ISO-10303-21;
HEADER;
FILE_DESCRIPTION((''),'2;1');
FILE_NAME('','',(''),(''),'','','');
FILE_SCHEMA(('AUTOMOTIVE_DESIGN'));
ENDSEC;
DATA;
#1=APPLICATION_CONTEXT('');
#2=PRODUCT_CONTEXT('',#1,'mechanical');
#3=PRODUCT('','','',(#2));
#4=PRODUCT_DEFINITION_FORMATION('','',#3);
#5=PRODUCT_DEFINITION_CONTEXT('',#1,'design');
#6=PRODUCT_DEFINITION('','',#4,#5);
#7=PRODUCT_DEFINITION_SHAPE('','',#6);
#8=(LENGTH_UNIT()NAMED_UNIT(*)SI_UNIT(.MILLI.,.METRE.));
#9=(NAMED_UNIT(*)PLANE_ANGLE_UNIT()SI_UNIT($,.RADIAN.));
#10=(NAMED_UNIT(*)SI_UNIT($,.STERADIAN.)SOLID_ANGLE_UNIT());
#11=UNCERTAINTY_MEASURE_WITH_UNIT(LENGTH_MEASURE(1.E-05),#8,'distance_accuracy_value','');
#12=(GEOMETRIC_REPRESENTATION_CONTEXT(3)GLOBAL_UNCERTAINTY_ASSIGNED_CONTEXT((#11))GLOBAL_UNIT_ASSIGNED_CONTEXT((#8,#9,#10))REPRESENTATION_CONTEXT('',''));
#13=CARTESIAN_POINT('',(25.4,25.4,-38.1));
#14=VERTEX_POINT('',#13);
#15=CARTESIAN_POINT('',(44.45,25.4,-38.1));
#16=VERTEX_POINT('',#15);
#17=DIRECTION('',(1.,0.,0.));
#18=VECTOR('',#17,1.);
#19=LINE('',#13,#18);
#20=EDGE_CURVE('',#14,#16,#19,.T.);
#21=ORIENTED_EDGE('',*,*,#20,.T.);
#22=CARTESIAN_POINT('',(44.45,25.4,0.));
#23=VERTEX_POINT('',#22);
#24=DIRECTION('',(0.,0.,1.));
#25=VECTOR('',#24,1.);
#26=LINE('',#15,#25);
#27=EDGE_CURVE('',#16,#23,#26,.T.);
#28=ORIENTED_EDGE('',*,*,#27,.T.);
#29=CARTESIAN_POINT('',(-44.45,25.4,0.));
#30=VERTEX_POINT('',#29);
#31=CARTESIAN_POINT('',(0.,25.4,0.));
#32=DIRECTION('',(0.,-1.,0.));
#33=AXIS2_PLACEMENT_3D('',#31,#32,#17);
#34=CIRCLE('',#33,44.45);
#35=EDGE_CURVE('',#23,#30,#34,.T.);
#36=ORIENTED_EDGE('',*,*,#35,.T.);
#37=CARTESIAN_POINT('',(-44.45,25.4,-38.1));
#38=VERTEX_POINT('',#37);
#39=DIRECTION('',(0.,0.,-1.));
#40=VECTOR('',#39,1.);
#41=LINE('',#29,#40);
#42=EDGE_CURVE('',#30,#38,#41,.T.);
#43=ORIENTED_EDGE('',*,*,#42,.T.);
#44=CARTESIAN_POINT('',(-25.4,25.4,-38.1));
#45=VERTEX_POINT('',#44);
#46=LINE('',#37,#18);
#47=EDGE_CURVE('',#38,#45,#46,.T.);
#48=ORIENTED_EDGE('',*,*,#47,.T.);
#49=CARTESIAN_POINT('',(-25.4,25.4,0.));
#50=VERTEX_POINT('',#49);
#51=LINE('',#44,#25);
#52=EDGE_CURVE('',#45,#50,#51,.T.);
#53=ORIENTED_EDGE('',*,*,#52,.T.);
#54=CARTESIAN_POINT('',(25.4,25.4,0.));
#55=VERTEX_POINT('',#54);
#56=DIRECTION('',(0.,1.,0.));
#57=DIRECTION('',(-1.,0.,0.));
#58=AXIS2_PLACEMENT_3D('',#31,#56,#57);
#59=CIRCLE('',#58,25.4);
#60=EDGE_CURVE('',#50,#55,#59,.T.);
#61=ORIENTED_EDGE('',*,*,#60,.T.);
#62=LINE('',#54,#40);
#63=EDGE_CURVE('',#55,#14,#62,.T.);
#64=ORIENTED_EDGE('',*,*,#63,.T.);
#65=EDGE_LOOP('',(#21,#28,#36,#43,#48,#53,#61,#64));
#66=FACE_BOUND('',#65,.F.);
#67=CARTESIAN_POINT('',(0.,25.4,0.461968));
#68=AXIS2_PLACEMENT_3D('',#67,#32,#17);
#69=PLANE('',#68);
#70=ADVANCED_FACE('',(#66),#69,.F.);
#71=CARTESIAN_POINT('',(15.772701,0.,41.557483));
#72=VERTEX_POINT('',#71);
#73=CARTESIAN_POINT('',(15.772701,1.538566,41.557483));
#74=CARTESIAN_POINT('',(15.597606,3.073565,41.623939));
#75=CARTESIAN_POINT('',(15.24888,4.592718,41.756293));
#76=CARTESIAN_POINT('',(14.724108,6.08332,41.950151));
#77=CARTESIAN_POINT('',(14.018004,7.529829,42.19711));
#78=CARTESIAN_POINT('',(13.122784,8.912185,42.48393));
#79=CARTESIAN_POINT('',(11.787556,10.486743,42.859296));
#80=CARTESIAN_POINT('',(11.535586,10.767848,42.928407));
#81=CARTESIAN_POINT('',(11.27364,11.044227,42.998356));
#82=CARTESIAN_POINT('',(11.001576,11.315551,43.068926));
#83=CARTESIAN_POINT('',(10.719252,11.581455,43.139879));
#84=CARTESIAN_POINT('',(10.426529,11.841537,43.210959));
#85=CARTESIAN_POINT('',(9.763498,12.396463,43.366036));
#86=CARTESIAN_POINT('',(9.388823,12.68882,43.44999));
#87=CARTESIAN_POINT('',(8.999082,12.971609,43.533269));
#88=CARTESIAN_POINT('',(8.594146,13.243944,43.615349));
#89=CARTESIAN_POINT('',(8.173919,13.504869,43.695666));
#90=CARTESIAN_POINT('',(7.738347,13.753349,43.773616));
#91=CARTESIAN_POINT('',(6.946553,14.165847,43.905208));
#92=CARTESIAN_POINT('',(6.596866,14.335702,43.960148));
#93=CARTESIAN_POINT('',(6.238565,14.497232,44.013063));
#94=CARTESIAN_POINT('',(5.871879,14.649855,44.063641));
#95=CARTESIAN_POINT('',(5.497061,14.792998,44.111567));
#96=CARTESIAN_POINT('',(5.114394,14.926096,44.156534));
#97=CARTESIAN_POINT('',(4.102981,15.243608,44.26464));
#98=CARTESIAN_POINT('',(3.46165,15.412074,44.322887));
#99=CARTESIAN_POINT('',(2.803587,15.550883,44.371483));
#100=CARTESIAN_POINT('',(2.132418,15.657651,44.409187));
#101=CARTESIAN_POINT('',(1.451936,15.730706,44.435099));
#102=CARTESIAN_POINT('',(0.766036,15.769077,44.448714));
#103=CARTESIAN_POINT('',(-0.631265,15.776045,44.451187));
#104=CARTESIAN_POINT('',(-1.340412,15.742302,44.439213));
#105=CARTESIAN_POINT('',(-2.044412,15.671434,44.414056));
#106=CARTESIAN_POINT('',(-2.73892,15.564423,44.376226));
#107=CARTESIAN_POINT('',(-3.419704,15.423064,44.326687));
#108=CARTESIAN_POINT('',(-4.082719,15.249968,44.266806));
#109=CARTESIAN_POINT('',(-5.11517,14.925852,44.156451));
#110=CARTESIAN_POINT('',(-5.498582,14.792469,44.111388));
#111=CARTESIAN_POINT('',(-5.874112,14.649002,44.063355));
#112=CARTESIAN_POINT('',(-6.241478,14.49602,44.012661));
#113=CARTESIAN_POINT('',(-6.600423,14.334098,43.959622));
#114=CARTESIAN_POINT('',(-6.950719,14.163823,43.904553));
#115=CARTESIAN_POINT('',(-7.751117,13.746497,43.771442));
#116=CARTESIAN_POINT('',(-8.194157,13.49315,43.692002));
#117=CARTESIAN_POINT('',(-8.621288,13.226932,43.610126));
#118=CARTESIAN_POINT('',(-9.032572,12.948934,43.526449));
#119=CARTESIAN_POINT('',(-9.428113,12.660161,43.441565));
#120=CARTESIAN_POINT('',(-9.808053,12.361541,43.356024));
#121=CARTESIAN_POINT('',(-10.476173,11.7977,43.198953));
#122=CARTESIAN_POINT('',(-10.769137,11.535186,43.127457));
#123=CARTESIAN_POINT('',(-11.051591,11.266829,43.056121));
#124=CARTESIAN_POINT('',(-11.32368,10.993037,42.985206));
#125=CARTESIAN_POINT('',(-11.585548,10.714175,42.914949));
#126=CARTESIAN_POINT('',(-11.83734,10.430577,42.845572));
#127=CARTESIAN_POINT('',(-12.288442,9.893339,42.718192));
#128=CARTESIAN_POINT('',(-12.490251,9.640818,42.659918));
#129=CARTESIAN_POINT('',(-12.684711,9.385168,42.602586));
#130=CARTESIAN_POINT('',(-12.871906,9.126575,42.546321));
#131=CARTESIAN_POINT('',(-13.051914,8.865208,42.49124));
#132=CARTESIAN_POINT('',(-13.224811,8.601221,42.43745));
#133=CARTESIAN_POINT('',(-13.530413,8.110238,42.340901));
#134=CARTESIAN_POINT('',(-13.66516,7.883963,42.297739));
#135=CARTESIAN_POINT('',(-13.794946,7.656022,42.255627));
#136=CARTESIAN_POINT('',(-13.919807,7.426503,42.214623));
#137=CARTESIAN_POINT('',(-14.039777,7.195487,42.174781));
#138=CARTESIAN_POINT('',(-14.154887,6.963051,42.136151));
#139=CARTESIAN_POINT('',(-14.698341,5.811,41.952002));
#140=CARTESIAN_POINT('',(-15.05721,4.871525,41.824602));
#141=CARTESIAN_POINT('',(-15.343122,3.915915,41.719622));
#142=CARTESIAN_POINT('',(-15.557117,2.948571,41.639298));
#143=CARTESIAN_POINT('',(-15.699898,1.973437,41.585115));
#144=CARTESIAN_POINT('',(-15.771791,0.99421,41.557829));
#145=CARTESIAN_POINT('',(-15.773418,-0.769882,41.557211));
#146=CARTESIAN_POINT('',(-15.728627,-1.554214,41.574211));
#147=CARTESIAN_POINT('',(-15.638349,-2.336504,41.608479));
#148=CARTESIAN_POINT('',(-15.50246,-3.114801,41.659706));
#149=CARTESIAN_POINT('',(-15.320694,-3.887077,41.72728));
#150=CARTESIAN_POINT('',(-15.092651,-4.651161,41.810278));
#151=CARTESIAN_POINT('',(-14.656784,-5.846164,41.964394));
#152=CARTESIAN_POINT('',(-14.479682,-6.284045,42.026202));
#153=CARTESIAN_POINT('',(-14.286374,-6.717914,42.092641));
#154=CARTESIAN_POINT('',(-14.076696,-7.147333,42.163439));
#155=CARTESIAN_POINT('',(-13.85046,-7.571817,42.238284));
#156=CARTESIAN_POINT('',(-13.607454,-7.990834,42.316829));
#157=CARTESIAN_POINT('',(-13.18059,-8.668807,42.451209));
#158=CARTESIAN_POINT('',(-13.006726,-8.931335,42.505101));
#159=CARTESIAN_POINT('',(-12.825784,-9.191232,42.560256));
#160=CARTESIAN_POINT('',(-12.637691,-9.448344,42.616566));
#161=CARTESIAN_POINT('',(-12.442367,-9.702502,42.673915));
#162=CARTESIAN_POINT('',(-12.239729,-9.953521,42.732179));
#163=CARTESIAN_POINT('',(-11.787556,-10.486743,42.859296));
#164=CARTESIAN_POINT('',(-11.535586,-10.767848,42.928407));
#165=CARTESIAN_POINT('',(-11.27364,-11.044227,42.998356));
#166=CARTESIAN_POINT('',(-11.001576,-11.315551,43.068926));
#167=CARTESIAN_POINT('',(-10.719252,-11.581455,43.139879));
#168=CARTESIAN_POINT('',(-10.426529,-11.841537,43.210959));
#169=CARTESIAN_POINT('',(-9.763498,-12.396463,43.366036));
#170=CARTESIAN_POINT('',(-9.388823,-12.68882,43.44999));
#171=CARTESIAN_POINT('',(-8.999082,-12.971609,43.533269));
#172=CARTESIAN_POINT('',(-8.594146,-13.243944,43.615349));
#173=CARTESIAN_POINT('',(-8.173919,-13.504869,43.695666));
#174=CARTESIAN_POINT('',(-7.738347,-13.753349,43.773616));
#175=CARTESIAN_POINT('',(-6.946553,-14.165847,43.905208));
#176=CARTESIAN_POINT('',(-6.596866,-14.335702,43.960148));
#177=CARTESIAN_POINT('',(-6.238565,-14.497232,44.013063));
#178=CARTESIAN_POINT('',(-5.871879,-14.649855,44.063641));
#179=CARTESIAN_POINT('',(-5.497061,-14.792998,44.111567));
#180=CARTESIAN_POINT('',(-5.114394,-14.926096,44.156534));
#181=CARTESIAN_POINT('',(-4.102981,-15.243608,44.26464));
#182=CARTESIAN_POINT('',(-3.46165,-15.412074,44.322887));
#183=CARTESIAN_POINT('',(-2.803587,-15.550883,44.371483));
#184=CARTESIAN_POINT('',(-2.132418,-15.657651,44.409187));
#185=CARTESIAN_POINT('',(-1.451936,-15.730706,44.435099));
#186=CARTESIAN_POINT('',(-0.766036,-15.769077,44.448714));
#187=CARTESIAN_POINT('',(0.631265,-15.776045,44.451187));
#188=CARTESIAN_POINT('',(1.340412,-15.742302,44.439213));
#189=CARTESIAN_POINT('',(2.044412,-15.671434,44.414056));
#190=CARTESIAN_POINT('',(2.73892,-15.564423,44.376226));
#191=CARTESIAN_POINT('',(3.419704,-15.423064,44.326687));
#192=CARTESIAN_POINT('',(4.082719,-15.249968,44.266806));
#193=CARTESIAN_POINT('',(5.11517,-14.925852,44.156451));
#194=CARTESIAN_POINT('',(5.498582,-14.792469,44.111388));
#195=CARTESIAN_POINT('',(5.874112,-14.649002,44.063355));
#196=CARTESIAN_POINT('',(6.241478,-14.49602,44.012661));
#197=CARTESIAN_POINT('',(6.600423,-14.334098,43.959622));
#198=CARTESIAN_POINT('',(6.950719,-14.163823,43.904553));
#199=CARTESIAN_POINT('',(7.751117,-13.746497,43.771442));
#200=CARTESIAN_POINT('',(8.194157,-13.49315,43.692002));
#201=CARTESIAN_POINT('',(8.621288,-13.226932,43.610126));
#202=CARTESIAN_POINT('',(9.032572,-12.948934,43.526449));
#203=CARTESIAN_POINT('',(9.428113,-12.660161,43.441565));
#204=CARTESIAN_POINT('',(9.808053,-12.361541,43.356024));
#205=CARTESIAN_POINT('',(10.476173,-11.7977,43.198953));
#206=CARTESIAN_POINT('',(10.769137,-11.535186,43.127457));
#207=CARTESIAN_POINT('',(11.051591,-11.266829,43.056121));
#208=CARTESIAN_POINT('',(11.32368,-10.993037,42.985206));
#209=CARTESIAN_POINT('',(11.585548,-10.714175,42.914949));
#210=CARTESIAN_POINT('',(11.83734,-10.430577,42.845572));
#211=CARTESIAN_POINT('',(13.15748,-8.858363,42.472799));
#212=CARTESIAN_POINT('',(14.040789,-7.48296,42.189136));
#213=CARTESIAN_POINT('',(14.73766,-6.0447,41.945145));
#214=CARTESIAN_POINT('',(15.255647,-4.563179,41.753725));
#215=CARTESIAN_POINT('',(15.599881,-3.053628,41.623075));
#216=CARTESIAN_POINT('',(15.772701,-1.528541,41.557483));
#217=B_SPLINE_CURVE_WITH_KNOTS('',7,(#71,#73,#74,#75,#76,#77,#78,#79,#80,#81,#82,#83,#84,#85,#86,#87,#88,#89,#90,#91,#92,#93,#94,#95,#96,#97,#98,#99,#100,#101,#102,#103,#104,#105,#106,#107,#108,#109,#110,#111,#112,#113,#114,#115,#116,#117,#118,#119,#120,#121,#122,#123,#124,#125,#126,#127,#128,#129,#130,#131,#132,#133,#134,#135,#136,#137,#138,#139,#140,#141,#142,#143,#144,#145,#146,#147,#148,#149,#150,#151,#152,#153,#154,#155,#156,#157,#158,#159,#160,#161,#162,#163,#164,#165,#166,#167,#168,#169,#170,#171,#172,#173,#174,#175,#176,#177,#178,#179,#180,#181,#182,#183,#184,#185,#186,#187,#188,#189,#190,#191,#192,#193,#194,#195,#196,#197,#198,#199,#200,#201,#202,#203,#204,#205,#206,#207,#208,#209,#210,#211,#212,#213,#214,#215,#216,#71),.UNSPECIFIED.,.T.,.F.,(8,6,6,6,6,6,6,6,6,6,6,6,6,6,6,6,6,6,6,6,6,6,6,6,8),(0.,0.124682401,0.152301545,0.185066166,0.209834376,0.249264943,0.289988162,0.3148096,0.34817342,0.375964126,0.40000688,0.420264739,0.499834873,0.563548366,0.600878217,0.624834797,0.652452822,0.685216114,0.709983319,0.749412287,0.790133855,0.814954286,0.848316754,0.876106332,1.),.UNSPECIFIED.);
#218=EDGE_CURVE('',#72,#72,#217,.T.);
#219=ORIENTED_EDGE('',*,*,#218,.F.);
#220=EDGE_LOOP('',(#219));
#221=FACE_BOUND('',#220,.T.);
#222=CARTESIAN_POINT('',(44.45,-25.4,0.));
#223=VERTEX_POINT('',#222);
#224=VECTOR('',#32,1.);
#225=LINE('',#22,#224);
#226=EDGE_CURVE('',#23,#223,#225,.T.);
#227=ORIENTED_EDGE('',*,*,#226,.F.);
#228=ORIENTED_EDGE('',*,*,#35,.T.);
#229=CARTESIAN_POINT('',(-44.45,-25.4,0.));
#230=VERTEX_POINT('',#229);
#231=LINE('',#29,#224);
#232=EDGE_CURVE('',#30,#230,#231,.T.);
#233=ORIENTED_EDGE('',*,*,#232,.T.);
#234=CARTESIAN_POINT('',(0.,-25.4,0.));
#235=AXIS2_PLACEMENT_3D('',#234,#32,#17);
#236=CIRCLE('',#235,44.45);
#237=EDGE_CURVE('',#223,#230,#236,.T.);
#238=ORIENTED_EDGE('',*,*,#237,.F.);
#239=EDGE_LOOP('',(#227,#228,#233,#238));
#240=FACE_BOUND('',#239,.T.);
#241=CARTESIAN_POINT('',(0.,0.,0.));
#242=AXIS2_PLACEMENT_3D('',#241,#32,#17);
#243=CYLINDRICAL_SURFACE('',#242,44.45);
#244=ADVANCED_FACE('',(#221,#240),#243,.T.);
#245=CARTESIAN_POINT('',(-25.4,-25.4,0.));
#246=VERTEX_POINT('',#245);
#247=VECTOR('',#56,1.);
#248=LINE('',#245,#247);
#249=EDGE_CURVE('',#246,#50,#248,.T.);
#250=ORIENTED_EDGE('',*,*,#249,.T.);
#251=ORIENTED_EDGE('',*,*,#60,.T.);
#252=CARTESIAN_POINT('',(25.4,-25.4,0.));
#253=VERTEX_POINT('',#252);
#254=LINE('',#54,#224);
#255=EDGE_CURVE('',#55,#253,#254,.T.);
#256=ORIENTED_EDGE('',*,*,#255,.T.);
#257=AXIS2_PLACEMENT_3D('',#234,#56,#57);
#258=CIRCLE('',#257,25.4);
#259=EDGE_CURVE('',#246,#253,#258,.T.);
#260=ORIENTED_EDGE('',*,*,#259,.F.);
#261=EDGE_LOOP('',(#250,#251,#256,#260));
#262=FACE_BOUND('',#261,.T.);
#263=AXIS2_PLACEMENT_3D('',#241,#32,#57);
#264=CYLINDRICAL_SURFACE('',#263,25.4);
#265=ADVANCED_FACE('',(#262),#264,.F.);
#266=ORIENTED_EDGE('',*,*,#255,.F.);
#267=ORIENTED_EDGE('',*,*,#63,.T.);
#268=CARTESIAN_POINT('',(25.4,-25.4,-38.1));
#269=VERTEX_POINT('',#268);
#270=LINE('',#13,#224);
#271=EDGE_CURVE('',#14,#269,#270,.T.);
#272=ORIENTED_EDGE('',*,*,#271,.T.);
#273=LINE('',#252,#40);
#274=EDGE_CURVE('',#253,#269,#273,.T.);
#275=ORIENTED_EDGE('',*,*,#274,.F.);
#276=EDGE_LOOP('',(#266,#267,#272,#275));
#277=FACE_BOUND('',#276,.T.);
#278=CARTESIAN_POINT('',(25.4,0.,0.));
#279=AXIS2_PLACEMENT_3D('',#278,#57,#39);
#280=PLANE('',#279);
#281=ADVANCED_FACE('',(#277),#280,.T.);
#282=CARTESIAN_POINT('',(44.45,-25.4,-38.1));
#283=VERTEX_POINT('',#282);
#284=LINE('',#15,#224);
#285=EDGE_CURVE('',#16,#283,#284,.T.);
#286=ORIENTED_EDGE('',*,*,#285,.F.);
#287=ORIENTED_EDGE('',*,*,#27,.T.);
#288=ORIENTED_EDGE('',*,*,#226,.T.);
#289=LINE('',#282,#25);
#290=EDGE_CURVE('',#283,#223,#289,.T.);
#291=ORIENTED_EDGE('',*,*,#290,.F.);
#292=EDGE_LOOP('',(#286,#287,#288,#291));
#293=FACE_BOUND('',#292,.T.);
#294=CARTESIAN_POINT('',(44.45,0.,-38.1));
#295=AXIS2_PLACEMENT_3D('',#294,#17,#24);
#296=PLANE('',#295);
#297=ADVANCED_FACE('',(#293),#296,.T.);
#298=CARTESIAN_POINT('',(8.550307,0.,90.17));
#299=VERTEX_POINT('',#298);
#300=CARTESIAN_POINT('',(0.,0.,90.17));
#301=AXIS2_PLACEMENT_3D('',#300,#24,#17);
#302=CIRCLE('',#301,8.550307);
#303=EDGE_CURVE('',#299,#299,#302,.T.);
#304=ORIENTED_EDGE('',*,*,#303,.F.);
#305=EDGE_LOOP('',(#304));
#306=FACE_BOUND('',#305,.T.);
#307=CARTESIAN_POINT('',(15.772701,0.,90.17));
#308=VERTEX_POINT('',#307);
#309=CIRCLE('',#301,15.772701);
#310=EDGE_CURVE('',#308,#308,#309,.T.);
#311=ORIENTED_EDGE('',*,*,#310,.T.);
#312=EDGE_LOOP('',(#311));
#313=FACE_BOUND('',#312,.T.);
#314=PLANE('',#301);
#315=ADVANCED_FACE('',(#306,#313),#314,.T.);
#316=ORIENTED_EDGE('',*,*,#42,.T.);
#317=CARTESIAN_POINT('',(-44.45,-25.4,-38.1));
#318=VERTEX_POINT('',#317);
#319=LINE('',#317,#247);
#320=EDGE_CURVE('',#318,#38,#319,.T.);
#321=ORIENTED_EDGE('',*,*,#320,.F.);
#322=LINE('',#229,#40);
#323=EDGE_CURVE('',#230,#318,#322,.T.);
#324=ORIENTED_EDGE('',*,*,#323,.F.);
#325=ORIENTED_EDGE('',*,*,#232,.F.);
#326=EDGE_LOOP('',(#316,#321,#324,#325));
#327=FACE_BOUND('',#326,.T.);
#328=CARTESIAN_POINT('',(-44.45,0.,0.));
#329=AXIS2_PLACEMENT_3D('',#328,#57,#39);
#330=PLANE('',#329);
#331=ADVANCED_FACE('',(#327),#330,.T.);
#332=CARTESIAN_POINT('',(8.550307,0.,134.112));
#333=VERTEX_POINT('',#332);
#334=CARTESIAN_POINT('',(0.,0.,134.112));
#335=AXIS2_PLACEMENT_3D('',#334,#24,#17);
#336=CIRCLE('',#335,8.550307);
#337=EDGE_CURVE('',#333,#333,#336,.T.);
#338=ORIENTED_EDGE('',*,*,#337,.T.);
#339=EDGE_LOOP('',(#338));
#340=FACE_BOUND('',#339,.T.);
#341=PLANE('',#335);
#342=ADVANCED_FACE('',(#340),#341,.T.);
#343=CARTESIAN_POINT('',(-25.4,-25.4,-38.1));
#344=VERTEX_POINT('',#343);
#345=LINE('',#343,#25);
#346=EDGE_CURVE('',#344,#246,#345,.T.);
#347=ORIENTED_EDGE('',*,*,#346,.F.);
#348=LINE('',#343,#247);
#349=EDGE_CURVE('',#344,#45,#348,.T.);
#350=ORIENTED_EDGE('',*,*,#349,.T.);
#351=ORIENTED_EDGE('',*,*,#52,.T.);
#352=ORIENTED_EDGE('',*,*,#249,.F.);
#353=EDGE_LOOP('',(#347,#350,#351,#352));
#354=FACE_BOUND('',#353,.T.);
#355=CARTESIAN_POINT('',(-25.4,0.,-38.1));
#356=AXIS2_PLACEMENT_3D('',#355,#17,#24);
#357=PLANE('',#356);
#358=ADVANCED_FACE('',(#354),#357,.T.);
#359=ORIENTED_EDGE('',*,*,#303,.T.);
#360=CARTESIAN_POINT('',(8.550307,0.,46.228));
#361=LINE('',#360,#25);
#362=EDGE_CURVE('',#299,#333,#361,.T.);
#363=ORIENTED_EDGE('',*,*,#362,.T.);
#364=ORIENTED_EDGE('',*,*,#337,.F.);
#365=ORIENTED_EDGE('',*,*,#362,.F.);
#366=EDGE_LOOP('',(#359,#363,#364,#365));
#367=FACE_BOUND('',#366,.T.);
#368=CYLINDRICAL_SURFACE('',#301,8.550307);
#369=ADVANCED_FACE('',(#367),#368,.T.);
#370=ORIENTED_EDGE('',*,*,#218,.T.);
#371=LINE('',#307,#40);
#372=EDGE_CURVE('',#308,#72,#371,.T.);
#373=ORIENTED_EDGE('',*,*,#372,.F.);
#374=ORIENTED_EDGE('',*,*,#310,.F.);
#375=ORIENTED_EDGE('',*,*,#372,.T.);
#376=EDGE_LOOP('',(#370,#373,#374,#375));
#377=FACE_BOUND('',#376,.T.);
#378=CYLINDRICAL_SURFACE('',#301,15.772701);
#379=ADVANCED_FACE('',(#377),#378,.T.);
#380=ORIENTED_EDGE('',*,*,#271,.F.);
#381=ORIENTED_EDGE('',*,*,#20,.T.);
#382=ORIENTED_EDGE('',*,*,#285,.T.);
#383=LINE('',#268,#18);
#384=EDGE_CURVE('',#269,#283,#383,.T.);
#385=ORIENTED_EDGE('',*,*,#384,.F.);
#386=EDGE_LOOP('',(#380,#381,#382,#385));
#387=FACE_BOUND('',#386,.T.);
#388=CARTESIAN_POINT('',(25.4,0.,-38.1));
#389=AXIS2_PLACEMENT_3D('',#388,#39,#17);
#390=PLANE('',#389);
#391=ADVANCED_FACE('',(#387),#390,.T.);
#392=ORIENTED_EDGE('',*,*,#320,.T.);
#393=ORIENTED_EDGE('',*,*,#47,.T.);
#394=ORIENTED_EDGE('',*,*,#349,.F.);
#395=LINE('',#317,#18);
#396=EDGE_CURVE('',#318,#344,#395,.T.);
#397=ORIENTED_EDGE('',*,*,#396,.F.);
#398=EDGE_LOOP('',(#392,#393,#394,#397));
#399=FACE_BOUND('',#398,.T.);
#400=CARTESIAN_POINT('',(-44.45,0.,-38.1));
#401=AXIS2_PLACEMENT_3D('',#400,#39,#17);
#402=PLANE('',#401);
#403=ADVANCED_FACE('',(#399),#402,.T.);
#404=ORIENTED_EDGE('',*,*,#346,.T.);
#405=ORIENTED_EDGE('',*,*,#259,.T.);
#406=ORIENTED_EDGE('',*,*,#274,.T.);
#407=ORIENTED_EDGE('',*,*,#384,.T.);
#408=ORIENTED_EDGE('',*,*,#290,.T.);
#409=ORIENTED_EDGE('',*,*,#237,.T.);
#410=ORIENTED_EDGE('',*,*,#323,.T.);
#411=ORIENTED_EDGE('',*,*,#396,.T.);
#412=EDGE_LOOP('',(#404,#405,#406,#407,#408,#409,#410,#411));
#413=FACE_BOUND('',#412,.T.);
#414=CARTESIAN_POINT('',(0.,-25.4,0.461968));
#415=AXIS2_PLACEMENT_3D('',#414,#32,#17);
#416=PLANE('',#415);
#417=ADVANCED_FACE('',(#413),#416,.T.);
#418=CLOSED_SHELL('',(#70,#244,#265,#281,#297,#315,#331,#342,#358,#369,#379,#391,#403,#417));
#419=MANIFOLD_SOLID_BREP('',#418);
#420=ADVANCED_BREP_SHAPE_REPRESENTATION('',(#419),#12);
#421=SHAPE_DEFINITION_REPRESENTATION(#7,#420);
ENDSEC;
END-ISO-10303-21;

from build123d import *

# Parameters (mm, degrees)
F1_DEPTH = 25.4
F3_R     = 15.7727010677
F5_R     = 8.5503070877
F6_DEPTH = 43.942


with BuildPart() as f1:
    # F0 (on Front) → F1 (new body, symmetric)
    with BuildSketch(Plane.XZ):
        with BuildLine():
            ThreePointArc((-25.4, 0), (0, 25.4), (25.4, 0))
            Line((25.4, 0), (25.4, -38.1))
            Line((25.4, -38.1), (44.45, -38.1))
            Line((44.45, -38.1), (44.45, 0))
            ThreePointArc((44.45, 0), (0, 44.45), (-44.45, 0))
            Line((-44.45, 0), (-44.45, -38.1))
            Line((-44.45, -38.1), (-25.4, -38.1))
            Line((-25.4, -38.1), (-25.4, 0))
        make_face()
    extrude(amount=F1_DEPTH, both=True)

    # F3 (on offset) → F4 (join, up to the next surface of F1)
    with BuildSketch(Plane.XY.offset(90.17)):
        Circle(F3_R)
    extrude(until=Until.NEXT, dir=(0, 0, -1))

    # F5 (on offset) → F6 (join, symmetric)
    with BuildSketch(Plane.XY.offset(90.17)):
        Circle(F5_R)
    extrude(amount=F6_DEPTH, both=True)


solid = f1.part
